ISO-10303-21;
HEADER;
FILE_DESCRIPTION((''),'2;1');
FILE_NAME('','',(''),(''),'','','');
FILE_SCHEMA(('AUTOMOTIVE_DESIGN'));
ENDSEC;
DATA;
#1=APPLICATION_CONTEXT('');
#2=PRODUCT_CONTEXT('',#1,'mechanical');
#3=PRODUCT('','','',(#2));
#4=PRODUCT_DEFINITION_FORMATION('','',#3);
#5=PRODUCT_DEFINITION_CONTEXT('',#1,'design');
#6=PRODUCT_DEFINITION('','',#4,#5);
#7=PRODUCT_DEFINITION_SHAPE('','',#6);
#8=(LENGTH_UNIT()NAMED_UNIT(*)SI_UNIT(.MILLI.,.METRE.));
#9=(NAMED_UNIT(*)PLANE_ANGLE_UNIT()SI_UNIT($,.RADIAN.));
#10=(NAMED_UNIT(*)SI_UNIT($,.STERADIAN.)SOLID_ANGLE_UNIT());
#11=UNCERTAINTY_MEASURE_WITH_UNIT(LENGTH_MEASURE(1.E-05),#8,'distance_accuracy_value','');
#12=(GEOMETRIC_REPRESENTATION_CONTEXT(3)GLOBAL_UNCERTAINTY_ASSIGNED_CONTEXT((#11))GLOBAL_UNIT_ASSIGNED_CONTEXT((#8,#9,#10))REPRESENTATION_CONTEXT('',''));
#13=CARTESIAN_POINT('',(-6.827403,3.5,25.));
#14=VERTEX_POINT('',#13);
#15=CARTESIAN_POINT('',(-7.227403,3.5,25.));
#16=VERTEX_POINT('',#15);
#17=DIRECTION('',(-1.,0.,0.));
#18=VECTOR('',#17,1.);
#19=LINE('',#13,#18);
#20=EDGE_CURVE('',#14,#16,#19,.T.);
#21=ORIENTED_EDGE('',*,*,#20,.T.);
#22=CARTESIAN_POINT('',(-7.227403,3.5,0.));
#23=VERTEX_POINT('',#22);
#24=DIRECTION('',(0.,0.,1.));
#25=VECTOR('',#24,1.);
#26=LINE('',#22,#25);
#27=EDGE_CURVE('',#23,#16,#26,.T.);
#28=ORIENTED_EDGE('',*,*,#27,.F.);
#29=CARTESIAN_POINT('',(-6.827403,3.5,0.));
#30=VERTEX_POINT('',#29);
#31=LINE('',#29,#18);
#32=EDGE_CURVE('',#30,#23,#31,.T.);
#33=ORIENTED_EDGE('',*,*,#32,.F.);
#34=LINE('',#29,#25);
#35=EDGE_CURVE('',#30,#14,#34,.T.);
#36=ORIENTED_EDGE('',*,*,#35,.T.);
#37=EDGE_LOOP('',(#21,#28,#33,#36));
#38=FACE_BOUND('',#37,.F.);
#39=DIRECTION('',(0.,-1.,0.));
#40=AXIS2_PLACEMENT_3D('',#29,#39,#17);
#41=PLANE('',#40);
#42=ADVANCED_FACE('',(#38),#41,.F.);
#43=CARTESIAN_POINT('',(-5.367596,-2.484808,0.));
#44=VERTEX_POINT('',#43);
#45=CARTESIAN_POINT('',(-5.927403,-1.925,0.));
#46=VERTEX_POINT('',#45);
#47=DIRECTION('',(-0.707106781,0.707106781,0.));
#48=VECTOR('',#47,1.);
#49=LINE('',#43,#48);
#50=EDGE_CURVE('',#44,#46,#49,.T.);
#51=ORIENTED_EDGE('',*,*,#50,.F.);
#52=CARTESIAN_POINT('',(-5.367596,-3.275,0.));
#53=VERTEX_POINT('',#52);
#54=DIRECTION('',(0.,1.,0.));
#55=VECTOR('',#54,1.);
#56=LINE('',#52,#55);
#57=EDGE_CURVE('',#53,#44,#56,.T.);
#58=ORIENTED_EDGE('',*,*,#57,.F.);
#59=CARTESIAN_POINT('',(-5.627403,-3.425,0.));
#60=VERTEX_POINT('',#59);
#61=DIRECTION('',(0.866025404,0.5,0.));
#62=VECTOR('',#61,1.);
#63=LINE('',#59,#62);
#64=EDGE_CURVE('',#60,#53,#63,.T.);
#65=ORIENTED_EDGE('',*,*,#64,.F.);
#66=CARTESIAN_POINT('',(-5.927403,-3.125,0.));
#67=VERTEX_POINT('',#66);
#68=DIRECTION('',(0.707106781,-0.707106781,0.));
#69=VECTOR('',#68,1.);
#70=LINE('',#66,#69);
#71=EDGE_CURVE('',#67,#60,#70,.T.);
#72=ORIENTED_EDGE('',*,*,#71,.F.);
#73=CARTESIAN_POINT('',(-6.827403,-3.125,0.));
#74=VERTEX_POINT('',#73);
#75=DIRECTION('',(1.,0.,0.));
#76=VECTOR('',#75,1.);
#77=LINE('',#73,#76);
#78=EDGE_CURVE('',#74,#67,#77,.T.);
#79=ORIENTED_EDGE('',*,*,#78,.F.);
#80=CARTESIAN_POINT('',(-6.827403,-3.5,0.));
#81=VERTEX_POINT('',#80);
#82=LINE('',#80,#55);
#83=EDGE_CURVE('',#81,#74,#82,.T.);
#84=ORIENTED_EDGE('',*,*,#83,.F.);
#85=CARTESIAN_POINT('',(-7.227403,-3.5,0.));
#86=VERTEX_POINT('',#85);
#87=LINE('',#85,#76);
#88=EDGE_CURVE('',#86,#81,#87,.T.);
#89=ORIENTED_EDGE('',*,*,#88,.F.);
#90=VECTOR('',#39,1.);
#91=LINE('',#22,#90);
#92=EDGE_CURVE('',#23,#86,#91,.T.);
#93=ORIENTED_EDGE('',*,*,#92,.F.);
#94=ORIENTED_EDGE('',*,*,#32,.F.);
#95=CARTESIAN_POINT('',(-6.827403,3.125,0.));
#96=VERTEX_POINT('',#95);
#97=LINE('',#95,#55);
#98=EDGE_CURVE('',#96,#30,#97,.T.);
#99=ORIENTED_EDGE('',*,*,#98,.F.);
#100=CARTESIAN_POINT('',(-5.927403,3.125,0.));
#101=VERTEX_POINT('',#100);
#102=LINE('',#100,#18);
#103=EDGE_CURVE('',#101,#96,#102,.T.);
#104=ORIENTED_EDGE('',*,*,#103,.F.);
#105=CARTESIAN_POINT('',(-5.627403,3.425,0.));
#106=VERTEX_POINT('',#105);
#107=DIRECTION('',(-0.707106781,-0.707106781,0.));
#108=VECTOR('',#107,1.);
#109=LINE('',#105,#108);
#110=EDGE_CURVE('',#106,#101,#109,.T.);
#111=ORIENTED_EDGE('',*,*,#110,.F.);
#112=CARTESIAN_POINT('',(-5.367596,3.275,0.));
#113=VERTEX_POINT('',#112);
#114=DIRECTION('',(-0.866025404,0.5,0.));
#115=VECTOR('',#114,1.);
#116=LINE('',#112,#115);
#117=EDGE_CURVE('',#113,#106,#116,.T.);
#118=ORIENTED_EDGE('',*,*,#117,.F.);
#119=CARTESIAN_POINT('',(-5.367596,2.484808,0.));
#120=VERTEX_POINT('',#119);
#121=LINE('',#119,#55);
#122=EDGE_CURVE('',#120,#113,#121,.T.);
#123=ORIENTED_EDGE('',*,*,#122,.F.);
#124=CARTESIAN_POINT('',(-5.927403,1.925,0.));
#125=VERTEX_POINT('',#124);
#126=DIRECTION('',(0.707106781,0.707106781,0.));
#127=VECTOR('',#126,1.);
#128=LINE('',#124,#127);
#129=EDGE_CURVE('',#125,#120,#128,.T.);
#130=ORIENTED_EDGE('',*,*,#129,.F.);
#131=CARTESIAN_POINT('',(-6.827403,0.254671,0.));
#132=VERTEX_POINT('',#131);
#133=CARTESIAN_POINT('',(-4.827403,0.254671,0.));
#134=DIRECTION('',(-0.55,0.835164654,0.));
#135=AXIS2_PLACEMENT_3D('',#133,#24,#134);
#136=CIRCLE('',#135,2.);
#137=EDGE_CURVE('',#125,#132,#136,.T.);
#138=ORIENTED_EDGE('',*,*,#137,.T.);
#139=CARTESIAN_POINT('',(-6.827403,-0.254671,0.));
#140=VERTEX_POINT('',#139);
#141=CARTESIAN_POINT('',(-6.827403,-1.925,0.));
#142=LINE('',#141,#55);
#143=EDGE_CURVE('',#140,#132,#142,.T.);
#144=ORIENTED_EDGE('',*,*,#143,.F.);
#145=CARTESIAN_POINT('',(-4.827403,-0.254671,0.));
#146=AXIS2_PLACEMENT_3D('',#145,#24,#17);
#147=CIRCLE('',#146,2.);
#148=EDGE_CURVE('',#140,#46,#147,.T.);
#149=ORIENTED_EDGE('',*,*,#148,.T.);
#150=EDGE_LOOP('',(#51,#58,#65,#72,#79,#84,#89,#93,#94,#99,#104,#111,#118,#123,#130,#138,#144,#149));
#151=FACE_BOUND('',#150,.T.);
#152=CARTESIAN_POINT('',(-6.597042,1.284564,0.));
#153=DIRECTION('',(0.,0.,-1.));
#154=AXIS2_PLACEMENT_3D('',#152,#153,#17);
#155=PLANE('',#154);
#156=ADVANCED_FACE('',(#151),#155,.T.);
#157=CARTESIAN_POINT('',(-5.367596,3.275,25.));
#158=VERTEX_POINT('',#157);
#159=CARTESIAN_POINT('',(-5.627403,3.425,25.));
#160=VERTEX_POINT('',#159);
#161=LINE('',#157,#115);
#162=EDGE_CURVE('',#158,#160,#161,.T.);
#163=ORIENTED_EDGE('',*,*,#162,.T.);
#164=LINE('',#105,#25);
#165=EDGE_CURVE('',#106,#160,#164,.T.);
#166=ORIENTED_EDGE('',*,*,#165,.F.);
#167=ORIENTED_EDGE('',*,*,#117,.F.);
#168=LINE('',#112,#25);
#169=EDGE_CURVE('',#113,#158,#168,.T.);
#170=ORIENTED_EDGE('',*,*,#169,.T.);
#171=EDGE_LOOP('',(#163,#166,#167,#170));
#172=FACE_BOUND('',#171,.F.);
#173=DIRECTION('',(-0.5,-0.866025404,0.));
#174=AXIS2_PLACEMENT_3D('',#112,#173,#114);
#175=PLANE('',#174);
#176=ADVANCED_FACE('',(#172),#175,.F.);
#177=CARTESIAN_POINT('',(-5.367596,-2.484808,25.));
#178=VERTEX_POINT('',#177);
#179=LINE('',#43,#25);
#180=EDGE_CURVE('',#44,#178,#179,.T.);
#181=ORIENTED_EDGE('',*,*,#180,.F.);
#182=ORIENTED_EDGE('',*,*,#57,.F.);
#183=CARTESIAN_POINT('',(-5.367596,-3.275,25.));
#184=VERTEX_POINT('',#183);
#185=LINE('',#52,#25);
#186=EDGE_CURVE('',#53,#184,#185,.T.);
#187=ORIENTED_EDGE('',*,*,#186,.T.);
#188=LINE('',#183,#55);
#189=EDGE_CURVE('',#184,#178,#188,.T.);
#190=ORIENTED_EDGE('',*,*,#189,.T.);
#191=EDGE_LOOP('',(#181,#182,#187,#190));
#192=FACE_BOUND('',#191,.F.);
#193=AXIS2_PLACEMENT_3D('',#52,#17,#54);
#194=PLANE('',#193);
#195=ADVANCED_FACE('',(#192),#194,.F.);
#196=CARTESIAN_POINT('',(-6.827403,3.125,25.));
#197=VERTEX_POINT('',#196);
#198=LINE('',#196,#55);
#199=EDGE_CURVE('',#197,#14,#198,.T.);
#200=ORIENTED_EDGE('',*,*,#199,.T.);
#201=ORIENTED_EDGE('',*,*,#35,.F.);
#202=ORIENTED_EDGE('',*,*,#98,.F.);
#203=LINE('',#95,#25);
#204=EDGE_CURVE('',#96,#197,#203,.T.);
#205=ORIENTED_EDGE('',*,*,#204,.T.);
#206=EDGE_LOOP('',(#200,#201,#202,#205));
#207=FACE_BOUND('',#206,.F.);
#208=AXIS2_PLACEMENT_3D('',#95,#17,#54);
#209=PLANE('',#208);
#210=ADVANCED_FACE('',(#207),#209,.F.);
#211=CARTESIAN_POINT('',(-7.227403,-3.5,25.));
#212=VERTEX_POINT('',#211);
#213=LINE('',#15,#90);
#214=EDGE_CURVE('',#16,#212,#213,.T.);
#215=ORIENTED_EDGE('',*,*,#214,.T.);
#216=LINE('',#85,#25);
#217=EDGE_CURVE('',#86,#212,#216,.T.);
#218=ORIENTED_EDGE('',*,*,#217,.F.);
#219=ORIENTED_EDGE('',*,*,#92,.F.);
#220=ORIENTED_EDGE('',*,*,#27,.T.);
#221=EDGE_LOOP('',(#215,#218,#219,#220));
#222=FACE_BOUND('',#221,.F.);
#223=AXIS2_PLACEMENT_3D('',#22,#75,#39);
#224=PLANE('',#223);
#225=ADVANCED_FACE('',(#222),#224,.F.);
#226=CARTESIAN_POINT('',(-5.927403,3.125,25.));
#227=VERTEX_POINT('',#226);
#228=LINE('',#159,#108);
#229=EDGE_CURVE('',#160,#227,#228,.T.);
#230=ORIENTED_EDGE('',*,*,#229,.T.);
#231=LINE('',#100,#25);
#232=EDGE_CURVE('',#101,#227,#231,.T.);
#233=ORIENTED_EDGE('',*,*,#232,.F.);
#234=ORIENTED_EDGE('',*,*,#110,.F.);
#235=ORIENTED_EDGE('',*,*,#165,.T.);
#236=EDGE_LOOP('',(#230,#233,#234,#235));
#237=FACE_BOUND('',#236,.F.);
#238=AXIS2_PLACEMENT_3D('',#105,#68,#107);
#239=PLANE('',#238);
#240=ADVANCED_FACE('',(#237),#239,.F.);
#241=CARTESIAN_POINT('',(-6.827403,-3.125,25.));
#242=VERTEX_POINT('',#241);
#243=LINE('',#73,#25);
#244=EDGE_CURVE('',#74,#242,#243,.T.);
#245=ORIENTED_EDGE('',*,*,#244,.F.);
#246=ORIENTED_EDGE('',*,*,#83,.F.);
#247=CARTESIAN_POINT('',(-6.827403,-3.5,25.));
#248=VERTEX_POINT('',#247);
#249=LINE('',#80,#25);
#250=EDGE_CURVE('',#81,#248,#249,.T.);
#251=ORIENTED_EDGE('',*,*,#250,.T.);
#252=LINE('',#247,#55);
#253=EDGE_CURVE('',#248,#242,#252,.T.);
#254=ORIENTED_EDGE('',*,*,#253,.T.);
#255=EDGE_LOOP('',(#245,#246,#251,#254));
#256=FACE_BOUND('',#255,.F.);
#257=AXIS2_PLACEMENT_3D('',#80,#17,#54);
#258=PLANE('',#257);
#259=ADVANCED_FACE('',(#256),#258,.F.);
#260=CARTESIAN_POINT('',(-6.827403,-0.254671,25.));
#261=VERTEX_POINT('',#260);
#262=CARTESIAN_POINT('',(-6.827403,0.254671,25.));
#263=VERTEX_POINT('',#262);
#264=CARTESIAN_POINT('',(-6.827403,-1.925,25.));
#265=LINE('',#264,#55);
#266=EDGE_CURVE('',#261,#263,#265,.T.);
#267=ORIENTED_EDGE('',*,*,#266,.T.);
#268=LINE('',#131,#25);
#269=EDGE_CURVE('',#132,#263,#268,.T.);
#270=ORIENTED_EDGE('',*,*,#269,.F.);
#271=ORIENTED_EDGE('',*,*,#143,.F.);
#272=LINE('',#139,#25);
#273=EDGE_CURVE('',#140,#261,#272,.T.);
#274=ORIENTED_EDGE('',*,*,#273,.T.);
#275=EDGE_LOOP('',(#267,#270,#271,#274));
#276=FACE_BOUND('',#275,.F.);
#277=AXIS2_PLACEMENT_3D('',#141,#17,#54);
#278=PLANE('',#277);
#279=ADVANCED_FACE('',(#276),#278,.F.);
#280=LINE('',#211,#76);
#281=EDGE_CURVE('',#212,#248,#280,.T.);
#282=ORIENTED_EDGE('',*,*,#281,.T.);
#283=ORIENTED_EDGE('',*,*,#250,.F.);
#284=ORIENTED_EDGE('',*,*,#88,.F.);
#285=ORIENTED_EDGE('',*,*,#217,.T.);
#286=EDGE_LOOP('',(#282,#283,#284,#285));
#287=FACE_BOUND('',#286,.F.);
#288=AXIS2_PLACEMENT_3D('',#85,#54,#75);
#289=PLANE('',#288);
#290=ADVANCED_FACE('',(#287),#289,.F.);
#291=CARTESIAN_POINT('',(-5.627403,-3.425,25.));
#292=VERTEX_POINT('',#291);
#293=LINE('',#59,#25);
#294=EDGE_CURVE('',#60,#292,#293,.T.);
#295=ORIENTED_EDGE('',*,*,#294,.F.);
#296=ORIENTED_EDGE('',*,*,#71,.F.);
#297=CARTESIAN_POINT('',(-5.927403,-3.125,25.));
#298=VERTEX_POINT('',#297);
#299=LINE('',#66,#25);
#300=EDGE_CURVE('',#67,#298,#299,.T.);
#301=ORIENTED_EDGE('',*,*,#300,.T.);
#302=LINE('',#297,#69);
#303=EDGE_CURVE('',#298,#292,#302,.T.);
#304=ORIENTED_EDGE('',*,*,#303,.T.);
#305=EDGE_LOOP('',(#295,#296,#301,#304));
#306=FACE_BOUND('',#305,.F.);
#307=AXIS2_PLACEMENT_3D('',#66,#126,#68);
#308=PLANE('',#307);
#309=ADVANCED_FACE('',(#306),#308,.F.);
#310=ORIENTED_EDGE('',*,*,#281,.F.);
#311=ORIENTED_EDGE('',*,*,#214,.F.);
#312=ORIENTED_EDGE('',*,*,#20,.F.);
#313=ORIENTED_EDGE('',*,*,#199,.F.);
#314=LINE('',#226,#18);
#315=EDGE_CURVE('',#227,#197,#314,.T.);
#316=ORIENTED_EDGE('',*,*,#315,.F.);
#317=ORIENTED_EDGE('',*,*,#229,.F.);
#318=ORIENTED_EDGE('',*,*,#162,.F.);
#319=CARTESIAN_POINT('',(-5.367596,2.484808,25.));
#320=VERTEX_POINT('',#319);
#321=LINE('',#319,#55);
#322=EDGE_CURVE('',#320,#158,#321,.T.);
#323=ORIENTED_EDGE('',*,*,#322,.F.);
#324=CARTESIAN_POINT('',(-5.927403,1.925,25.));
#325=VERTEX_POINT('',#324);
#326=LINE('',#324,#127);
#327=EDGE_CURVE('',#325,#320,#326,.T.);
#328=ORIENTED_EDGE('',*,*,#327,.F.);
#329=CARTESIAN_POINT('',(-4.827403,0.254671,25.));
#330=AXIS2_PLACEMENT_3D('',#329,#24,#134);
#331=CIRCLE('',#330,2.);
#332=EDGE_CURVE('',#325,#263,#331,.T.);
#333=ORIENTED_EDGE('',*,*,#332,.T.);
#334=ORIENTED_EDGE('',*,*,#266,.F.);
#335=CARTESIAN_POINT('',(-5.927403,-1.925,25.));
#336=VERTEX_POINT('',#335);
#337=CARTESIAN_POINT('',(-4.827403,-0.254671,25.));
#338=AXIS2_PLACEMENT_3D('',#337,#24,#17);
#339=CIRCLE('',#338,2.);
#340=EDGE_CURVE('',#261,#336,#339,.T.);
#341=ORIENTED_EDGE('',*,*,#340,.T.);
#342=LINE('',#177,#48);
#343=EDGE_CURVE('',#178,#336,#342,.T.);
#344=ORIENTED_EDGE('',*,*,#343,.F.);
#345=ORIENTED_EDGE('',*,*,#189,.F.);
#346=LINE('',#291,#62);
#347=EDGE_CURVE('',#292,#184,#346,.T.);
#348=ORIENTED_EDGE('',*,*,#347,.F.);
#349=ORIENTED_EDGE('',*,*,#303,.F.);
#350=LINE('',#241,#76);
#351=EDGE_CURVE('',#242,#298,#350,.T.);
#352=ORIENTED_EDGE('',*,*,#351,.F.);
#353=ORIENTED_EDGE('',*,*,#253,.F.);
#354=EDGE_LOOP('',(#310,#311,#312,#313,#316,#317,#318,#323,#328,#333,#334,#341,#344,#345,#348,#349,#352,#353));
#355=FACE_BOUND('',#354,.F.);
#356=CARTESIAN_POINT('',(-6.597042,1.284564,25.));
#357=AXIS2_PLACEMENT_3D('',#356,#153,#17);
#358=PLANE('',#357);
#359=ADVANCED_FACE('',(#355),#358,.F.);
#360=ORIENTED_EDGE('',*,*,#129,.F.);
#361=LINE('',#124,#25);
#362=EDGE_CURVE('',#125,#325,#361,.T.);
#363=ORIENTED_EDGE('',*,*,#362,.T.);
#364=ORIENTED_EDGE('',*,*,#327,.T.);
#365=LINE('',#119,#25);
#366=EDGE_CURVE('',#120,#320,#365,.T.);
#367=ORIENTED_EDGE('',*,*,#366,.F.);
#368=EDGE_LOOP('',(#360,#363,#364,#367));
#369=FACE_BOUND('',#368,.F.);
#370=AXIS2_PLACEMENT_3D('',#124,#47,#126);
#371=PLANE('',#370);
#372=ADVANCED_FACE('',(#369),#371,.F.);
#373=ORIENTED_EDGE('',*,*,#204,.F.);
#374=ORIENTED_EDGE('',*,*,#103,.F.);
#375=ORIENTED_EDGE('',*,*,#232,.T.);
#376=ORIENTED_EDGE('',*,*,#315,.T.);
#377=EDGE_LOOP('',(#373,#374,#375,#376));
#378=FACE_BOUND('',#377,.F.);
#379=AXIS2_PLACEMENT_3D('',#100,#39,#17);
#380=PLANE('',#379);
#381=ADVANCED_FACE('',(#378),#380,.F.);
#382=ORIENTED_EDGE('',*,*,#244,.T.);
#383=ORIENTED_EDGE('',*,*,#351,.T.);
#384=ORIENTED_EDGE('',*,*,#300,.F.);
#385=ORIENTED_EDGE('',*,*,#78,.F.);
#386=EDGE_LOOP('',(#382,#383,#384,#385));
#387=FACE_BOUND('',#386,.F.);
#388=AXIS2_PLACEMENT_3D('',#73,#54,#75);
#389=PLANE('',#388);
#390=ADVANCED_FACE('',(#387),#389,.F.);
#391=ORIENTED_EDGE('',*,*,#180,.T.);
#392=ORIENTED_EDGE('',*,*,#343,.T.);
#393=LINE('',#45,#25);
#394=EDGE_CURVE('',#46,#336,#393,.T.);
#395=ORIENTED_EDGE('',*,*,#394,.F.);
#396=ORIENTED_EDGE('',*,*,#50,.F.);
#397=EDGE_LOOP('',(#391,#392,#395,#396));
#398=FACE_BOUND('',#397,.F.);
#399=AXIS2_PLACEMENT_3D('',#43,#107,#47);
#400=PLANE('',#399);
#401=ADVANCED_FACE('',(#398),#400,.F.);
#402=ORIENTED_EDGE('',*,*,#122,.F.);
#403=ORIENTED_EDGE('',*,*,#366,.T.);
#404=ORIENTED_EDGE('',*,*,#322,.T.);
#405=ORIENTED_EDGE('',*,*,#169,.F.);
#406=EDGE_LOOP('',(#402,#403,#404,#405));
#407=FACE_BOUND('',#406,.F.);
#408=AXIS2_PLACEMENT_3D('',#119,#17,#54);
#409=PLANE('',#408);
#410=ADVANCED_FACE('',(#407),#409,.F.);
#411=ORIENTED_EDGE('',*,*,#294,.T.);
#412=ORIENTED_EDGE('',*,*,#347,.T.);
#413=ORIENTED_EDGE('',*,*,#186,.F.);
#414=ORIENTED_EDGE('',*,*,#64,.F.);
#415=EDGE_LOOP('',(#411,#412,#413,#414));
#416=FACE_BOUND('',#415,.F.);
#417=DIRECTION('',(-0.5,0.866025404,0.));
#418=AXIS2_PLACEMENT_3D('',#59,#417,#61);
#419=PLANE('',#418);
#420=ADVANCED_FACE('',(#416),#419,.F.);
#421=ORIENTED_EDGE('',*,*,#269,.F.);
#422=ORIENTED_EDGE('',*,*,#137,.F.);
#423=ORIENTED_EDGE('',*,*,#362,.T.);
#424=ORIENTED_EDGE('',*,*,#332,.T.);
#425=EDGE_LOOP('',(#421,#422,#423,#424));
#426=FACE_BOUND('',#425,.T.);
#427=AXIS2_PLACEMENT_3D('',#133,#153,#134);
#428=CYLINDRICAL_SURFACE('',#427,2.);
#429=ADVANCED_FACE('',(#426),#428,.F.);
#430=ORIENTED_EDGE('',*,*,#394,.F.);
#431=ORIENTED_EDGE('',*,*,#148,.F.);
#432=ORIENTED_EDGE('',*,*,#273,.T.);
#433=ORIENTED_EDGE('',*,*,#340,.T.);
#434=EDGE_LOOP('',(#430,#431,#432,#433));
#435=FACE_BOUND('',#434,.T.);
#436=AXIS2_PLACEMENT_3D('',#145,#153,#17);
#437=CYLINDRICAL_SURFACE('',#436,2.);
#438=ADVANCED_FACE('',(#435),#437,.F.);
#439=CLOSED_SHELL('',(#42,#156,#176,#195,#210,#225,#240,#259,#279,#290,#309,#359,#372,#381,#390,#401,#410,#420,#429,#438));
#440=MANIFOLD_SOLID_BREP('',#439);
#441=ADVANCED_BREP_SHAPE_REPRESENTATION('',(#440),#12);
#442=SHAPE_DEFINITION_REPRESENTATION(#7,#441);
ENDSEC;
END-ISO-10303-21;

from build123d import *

# Parameters (mm, degrees)
F1_DEPTH    = 25
F2_T1_DEPTH = 25


# Not quite as in the source:
# - a fillet or chamfer that OpenCascade refuses, or shapes differently, is made with other operations: its cross-section is extruded or revolved along the edge and cut away or added


with BuildPart() as f1:
    # F0 (on Top) → F1 (new body)
    with BuildSketch(Plane.XY):
        Polygon((-6.8274033331, 3.5), (-7.2274033331, 3.5), (-7.2274033331, 0), (-7.2274033331, -3.5), (-6.8274033331, -3.5), (-6.8274033331, -3.125), (-5.9274033331, -3.125), (-5.6274033331, -3.425), (-5.3675957119, -3.275), (-5.3675957119, -2.4848076211), (-5.9274033331, -1.925), (-6.8274033331, -1.925), (-6.8274033331, -0.6), (-6.8274033331, 0.6), (-6.8274033331, 1.925), (-5.9274033331, 1.925), (-5.3675957119, 2.4848076211), (-5.3675957119, 3.275), (-5.6274033331, 3.425), (-5.9274033331, 3.125), (-6.8274033331, 3.125), align=None)
    extrude(amount=F1_DEPTH)

    # F2: fillet of radius 2 on 2 edges, made by hand

    # F2_s2 → F2_t1 (join)
    with BuildSketch(Plane.XY):
        with BuildLine():
            ThreePointArc((-5.9274033331, 1.925), (-6.5880850192, 1.2033539892), (-6.8274033331, 0.2546706911))
            Line((-6.8274033331, 0.2546706911), (-6.8274033331, 1.925))
            Line((-6.8274033331, 1.925), (-5.9274033331, 1.925))
        make_face()
        with BuildLine():
            ThreePointArc((-6.8274033331, -0.2546706911), (-6.5880850192, -1.2033539892), (-5.9274033331, -1.925))
            Line((-5.9274033331, -1.925), (-6.8274033331, -1.925))
            Line((-6.8274033331, -1.925), (-6.8274033331, -0.2546706911))
        make_face()
    extrude(amount=F2_T1_DEPTH)


solid = f1.part
